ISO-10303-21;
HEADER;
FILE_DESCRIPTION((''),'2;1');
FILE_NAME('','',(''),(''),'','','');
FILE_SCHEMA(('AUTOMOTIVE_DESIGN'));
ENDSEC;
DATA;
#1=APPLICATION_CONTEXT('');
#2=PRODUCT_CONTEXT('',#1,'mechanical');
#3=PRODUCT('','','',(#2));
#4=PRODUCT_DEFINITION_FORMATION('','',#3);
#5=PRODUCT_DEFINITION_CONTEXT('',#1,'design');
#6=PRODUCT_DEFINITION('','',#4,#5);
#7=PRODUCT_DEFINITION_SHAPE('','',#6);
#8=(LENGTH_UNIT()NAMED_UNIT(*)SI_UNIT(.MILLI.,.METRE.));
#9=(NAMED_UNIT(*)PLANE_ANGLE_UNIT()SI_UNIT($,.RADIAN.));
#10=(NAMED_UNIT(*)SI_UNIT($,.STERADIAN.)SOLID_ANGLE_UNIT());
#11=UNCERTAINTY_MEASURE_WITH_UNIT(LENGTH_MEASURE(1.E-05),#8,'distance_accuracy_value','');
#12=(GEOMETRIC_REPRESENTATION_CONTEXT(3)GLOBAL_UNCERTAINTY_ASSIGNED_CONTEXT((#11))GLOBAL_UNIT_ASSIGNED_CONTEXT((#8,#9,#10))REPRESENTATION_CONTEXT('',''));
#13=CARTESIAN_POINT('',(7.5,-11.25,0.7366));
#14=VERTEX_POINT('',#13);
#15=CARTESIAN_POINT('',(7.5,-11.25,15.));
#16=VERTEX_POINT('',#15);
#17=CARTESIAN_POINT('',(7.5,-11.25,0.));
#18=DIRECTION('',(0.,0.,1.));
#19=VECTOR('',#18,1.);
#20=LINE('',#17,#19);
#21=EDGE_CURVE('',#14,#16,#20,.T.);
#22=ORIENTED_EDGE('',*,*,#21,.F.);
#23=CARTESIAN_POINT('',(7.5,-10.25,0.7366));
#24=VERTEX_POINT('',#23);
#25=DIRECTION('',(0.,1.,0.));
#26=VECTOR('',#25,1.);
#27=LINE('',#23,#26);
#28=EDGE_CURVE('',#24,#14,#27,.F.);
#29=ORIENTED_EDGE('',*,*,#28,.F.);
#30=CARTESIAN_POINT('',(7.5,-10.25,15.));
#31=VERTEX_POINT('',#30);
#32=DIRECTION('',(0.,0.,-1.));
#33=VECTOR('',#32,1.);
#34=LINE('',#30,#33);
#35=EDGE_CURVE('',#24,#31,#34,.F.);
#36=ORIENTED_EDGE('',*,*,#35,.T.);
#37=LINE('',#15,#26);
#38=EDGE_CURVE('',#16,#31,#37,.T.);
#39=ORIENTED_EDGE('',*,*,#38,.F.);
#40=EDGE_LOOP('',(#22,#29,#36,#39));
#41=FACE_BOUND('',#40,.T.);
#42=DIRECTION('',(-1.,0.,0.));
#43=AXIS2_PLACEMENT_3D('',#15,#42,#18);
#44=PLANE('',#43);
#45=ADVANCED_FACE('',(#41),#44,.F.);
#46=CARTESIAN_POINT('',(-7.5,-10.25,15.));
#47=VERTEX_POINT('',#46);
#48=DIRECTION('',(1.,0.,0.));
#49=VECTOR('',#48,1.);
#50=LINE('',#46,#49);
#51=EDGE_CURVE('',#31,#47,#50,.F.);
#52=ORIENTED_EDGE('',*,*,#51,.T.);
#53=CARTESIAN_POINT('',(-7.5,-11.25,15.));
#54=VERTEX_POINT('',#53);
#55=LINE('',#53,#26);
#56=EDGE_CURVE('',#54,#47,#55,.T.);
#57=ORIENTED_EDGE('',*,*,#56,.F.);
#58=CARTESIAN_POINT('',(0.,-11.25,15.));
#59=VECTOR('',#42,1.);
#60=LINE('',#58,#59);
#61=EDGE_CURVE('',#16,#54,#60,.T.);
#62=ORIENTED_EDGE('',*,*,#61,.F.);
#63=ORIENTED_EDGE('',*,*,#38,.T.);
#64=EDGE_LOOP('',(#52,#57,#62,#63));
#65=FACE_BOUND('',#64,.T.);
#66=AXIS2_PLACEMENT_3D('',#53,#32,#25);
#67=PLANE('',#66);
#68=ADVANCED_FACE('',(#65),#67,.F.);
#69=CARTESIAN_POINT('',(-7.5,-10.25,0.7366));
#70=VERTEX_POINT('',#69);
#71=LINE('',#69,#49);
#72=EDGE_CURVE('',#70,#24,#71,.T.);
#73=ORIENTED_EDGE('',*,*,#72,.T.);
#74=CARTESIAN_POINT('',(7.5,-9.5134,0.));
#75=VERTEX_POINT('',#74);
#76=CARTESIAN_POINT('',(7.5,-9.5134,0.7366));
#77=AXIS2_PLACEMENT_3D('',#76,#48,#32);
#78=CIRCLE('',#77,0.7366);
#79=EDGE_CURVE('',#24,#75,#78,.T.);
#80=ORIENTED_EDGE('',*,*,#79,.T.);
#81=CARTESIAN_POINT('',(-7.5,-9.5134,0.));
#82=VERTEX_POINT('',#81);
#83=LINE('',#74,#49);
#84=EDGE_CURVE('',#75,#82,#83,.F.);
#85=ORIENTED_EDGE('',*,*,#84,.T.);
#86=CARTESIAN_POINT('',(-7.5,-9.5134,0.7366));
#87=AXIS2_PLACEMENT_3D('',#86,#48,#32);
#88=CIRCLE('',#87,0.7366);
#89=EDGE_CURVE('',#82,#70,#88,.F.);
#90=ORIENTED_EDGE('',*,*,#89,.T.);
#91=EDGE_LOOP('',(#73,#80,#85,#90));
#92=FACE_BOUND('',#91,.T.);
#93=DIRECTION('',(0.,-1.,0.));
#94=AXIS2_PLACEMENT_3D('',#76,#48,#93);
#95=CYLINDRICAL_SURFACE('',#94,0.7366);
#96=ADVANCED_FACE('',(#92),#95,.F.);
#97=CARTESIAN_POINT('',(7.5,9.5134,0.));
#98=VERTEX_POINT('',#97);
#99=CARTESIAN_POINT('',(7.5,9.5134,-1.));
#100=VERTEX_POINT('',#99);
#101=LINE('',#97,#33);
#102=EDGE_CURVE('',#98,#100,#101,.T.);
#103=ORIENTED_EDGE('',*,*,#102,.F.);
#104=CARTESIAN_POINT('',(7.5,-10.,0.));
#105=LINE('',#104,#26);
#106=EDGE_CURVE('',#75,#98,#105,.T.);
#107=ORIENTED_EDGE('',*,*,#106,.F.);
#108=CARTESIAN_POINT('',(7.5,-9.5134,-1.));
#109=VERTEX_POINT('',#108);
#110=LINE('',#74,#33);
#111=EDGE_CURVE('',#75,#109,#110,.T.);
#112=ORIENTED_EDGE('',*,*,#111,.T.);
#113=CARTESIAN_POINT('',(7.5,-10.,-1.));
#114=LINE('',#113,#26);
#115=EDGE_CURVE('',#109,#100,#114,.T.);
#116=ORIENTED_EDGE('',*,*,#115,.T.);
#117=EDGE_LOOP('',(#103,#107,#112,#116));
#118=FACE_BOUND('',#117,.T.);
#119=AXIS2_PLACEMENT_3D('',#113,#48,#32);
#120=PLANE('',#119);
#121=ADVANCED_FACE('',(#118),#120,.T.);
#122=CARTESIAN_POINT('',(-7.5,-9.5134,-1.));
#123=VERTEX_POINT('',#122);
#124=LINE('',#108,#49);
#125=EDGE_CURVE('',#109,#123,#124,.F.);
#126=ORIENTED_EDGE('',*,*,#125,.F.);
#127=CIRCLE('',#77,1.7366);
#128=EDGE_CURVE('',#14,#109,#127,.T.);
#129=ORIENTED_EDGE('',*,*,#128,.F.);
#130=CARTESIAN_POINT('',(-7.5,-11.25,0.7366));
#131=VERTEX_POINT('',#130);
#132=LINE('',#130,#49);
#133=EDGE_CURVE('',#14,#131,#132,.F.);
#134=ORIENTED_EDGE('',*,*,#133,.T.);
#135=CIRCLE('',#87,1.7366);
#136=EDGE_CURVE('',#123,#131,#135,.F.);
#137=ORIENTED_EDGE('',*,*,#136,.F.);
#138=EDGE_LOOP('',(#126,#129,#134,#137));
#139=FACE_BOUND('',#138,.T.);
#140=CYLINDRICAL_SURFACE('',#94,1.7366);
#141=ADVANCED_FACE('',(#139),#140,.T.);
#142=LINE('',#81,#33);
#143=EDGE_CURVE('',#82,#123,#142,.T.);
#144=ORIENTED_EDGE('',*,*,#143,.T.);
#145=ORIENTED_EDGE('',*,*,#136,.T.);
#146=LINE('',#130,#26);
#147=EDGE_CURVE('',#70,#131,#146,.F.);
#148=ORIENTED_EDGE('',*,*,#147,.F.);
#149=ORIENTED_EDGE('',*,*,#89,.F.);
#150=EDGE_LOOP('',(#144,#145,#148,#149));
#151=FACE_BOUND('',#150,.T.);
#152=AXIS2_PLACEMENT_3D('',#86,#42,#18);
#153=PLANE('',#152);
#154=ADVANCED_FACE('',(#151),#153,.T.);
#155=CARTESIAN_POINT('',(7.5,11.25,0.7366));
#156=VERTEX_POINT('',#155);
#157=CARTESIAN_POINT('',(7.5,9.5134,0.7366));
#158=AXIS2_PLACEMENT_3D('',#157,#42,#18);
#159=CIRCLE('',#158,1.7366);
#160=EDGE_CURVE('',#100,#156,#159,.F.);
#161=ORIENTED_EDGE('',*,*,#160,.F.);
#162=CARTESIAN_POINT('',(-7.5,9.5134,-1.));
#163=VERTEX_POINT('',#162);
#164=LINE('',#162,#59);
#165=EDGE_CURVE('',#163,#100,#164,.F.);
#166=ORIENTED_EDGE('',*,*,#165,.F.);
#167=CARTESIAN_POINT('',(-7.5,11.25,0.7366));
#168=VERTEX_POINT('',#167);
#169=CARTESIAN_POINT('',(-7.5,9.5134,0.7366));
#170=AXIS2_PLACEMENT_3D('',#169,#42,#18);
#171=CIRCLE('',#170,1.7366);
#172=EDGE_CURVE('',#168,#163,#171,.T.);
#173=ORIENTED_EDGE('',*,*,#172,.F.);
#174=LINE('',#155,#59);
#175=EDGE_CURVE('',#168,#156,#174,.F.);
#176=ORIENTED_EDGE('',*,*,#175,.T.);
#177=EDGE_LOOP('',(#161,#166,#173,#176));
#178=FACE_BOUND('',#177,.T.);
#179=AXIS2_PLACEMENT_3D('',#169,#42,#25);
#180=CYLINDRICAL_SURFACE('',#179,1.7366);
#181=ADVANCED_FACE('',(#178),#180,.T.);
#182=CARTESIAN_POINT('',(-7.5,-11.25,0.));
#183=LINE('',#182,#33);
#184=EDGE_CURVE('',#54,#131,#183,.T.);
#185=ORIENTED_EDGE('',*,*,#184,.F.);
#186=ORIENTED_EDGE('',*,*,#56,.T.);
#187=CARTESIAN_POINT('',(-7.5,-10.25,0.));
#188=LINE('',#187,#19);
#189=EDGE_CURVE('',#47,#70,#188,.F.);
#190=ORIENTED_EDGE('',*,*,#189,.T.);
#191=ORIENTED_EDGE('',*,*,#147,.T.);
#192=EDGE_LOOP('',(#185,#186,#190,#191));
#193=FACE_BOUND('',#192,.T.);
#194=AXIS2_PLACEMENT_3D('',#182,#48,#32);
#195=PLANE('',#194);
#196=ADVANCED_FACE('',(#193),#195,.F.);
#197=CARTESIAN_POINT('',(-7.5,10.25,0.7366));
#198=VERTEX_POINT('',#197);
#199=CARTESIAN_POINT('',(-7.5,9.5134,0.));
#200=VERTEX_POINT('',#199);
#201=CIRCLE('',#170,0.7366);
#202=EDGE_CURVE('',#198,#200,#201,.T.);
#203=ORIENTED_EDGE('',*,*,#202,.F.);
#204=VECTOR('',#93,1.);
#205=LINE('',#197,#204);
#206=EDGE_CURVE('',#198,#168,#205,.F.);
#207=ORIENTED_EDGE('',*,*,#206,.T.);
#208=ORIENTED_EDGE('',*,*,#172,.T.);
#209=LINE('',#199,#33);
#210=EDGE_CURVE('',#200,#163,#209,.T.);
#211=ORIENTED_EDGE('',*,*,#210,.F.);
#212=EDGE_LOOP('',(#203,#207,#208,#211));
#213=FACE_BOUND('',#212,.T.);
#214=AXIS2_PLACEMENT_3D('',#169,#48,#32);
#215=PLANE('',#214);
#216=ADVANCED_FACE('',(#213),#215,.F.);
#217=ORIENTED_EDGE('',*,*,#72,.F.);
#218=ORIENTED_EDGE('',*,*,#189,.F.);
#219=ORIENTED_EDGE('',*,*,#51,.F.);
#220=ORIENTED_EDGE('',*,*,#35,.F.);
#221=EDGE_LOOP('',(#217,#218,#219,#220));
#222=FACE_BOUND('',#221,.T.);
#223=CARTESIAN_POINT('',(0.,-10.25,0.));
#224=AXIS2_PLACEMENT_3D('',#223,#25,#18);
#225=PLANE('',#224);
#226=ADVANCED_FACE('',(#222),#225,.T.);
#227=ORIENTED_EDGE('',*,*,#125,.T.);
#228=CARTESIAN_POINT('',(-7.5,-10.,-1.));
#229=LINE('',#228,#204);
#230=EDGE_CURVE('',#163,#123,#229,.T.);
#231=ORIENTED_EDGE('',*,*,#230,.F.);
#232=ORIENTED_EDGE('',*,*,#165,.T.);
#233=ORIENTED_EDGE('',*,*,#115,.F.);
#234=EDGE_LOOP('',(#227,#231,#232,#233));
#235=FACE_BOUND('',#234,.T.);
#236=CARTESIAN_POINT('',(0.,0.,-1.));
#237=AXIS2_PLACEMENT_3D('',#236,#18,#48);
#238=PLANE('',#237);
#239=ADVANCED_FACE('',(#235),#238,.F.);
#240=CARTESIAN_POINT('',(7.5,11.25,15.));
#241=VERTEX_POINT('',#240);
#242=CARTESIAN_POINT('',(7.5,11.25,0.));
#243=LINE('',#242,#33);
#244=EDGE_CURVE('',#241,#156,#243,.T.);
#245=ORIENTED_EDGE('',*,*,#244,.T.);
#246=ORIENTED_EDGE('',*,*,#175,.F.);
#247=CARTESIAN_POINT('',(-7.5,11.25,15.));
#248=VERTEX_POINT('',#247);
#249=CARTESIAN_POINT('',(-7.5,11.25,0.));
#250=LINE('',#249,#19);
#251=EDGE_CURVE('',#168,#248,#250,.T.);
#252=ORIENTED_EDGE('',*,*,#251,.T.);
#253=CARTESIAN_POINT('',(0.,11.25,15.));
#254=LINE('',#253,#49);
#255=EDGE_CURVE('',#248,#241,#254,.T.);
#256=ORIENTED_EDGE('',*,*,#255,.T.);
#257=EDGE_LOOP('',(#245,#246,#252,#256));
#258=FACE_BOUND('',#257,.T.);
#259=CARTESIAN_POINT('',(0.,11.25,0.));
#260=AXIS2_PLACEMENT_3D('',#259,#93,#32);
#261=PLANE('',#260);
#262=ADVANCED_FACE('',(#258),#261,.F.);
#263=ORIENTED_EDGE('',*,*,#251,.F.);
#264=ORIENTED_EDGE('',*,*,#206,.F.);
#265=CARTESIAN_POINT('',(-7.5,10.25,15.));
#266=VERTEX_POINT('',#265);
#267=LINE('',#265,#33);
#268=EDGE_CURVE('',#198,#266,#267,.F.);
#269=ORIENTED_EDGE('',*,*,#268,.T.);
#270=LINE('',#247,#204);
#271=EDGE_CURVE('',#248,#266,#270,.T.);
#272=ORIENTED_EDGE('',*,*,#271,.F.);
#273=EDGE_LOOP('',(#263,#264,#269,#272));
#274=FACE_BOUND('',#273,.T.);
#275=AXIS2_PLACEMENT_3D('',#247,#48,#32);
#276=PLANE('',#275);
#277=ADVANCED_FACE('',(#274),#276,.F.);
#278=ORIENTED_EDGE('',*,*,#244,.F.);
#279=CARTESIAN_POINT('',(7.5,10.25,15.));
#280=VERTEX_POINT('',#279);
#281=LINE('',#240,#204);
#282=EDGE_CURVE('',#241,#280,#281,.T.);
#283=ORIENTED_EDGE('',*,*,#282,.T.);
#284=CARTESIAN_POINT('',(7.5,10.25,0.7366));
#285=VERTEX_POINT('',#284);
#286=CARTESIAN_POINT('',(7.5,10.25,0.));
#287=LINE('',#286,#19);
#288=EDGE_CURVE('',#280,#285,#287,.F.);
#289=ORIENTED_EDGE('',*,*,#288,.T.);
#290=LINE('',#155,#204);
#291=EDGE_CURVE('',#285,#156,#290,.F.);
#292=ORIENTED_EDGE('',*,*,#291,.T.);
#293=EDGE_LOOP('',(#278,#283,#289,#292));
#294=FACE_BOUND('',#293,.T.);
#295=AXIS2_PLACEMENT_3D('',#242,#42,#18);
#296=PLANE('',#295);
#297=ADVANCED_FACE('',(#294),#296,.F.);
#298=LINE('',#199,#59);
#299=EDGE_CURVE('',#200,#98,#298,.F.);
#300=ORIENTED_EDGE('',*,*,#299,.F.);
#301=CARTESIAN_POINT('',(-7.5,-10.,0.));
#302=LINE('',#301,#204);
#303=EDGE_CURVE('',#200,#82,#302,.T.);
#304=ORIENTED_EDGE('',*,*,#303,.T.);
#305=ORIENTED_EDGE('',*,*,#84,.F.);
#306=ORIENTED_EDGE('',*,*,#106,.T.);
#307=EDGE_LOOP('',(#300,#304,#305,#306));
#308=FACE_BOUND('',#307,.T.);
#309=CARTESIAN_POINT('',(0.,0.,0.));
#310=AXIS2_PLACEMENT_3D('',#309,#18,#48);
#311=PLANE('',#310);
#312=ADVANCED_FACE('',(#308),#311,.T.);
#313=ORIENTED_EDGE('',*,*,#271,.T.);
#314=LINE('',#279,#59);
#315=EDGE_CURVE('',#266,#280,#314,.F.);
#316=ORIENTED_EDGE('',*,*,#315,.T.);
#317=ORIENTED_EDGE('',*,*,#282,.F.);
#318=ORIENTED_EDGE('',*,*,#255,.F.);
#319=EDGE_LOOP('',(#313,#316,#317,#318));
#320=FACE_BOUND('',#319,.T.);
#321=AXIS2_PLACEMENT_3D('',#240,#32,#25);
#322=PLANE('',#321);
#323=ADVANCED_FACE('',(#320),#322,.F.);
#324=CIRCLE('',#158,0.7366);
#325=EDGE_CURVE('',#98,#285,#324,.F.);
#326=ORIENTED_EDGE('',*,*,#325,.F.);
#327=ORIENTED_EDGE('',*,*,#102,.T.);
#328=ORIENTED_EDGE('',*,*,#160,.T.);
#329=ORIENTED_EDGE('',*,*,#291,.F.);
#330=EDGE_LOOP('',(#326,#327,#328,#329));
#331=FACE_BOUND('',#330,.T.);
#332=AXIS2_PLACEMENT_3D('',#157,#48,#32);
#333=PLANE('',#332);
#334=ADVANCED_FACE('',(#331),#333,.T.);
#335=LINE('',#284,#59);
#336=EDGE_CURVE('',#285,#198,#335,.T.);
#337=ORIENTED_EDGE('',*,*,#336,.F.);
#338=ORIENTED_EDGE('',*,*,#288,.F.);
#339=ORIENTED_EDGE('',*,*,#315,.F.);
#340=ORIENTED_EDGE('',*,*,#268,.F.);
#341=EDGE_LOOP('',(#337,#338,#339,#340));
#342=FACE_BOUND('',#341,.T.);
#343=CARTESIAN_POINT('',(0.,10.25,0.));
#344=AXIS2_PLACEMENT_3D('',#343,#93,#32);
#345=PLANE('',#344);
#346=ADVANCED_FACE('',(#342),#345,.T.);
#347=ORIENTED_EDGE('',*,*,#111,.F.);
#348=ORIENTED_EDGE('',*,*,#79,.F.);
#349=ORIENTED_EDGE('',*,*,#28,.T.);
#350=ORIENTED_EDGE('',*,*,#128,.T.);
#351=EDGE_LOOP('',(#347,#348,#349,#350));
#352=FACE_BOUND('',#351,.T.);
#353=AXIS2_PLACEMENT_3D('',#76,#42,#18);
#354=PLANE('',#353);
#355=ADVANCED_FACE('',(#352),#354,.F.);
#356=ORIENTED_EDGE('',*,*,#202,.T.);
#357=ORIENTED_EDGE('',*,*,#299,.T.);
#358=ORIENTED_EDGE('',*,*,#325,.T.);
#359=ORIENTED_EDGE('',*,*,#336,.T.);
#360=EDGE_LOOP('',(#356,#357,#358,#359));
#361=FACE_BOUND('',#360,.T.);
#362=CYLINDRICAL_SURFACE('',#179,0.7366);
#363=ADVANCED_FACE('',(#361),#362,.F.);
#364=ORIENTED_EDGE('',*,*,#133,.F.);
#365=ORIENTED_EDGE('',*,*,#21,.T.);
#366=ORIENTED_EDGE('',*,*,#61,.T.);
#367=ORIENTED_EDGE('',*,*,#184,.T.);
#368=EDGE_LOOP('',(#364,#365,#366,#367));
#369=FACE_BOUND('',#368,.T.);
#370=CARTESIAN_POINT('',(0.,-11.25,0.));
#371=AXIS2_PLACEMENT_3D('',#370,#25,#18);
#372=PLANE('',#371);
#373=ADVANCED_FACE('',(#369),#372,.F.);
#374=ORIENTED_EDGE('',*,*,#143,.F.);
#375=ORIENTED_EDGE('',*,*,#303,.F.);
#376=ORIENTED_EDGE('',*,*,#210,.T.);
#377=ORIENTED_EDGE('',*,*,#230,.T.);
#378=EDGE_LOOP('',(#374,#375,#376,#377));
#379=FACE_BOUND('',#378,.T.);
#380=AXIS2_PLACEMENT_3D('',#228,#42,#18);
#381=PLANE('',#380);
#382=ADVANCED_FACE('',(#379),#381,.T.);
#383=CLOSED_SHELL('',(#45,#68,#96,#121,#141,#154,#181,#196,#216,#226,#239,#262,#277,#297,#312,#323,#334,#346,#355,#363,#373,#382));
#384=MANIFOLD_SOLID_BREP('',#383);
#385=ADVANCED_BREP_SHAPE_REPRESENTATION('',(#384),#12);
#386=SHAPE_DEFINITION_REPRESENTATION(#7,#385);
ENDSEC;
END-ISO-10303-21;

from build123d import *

# Parameters (mm, degrees)
SKETCH1_W                    = 15
SKETCH1_H                    = 20
BASE_FLANGE1_DEPTH           = 1
EDGE_FLANGE1_STRIP_W         = 5.7232
EDGE_FLANGE1_STRIP_H         = 1
EDGE_FLANGE1_STRIP_CUT_DEPTH = 15
EDGE_FLANGE1_DEPTH           = 15
EDGE_FLANGE2_STRIP_W         = 5.7232
EDGE_FLANGE2_STRIP_H         = 1
EDGE_FLANGE2_STRIP_CUT_DEPTH = 15
EDGE_FLANGE2_DEPTH           = 15


# Sheet-metal steps are written as plain solids
with BuildPart() as part:
    # Sketch1 → Base-Flange1 (new body)
    with BuildSketch(Plane.XY):
        Rectangle(SKETCH1_W, SKETCH1_H)
    extrude(amount=-BASE_FLANGE1_DEPTH)

    # Edge-Flange1 strip (across the edge) → Edge-Flange1 strip cut (cut)
    with BuildSketch(Plane(origin=(7.5, 10.25, 0), x_dir=(0, -1, 0), z_dir=(-1, 0, 0))):
        with Locations((-2.125, -0.5)):
            Rectangle(EDGE_FLANGE1_STRIP_W, EDGE_FLANGE1_STRIP_H)
    extrude(amount=EDGE_FLANGE1_STRIP_CUT_DEPTH, mode=Mode.SUBTRACT)

    # Edge-Flange1 section (across the edge) → Edge-Flange1 (add)
    with BuildSketch(Plane(origin=(7.5, 10.25, 0), x_dir=(0, -1, 0), z_dir=(-1, 0, 0))):
        with BuildLine():
            Line((-1, 0.7366), (-1, 15))
            Line((-1, 15), (0, 15))
            Line((0, 15), (0, 0.7366))
            ThreePointArc((0, 0.7366), (0.215745145, 0.215745145), (0.7366, 0))
            Line((0.7366, 0), (0.7366, -1))
            ThreePointArc((0.7366, -1), (-0.491361636, -0.491361636), (-1, 0.7366))
        make_face()
    extrude(amount=EDGE_FLANGE1_DEPTH)

    # Edge-Flange2 strip (across the edge) → Edge-Flange2 strip cut (cut)
    with BuildSketch(Plane(origin=(-7.5, -10.25, 0), x_dir=(0, 1, 0), z_dir=(1, 0, 0))):
        with Locations((-2.125, -0.5)):
            Rectangle(EDGE_FLANGE2_STRIP_W, EDGE_FLANGE2_STRIP_H)
    extrude(amount=EDGE_FLANGE2_STRIP_CUT_DEPTH, mode=Mode.SUBTRACT)

    # Edge-Flange2 section (across the edge) → Edge-Flange2 (add)
    with BuildSketch(Plane(origin=(-7.5, -10.25, 0), x_dir=(0, 1, 0), z_dir=(1, 0, 0))):
        with BuildLine():
            Line((-1, 0.7366), (-1, 15))
            Line((-1, 15), (0, 15))
            Line((0, 15), (0, 0.7366))
            ThreePointArc((0, 0.7366), (0.215745145, 0.215745145), (0.7366, 0))
            Line((0.7366, 0), (0.7366, -1))
            ThreePointArc((0.7366, -1), (-0.491361636, -0.491361636), (-1, 0.7366))
        make_face()
    extrude(amount=EDGE_FLANGE2_DEPTH)


solid = part.part
